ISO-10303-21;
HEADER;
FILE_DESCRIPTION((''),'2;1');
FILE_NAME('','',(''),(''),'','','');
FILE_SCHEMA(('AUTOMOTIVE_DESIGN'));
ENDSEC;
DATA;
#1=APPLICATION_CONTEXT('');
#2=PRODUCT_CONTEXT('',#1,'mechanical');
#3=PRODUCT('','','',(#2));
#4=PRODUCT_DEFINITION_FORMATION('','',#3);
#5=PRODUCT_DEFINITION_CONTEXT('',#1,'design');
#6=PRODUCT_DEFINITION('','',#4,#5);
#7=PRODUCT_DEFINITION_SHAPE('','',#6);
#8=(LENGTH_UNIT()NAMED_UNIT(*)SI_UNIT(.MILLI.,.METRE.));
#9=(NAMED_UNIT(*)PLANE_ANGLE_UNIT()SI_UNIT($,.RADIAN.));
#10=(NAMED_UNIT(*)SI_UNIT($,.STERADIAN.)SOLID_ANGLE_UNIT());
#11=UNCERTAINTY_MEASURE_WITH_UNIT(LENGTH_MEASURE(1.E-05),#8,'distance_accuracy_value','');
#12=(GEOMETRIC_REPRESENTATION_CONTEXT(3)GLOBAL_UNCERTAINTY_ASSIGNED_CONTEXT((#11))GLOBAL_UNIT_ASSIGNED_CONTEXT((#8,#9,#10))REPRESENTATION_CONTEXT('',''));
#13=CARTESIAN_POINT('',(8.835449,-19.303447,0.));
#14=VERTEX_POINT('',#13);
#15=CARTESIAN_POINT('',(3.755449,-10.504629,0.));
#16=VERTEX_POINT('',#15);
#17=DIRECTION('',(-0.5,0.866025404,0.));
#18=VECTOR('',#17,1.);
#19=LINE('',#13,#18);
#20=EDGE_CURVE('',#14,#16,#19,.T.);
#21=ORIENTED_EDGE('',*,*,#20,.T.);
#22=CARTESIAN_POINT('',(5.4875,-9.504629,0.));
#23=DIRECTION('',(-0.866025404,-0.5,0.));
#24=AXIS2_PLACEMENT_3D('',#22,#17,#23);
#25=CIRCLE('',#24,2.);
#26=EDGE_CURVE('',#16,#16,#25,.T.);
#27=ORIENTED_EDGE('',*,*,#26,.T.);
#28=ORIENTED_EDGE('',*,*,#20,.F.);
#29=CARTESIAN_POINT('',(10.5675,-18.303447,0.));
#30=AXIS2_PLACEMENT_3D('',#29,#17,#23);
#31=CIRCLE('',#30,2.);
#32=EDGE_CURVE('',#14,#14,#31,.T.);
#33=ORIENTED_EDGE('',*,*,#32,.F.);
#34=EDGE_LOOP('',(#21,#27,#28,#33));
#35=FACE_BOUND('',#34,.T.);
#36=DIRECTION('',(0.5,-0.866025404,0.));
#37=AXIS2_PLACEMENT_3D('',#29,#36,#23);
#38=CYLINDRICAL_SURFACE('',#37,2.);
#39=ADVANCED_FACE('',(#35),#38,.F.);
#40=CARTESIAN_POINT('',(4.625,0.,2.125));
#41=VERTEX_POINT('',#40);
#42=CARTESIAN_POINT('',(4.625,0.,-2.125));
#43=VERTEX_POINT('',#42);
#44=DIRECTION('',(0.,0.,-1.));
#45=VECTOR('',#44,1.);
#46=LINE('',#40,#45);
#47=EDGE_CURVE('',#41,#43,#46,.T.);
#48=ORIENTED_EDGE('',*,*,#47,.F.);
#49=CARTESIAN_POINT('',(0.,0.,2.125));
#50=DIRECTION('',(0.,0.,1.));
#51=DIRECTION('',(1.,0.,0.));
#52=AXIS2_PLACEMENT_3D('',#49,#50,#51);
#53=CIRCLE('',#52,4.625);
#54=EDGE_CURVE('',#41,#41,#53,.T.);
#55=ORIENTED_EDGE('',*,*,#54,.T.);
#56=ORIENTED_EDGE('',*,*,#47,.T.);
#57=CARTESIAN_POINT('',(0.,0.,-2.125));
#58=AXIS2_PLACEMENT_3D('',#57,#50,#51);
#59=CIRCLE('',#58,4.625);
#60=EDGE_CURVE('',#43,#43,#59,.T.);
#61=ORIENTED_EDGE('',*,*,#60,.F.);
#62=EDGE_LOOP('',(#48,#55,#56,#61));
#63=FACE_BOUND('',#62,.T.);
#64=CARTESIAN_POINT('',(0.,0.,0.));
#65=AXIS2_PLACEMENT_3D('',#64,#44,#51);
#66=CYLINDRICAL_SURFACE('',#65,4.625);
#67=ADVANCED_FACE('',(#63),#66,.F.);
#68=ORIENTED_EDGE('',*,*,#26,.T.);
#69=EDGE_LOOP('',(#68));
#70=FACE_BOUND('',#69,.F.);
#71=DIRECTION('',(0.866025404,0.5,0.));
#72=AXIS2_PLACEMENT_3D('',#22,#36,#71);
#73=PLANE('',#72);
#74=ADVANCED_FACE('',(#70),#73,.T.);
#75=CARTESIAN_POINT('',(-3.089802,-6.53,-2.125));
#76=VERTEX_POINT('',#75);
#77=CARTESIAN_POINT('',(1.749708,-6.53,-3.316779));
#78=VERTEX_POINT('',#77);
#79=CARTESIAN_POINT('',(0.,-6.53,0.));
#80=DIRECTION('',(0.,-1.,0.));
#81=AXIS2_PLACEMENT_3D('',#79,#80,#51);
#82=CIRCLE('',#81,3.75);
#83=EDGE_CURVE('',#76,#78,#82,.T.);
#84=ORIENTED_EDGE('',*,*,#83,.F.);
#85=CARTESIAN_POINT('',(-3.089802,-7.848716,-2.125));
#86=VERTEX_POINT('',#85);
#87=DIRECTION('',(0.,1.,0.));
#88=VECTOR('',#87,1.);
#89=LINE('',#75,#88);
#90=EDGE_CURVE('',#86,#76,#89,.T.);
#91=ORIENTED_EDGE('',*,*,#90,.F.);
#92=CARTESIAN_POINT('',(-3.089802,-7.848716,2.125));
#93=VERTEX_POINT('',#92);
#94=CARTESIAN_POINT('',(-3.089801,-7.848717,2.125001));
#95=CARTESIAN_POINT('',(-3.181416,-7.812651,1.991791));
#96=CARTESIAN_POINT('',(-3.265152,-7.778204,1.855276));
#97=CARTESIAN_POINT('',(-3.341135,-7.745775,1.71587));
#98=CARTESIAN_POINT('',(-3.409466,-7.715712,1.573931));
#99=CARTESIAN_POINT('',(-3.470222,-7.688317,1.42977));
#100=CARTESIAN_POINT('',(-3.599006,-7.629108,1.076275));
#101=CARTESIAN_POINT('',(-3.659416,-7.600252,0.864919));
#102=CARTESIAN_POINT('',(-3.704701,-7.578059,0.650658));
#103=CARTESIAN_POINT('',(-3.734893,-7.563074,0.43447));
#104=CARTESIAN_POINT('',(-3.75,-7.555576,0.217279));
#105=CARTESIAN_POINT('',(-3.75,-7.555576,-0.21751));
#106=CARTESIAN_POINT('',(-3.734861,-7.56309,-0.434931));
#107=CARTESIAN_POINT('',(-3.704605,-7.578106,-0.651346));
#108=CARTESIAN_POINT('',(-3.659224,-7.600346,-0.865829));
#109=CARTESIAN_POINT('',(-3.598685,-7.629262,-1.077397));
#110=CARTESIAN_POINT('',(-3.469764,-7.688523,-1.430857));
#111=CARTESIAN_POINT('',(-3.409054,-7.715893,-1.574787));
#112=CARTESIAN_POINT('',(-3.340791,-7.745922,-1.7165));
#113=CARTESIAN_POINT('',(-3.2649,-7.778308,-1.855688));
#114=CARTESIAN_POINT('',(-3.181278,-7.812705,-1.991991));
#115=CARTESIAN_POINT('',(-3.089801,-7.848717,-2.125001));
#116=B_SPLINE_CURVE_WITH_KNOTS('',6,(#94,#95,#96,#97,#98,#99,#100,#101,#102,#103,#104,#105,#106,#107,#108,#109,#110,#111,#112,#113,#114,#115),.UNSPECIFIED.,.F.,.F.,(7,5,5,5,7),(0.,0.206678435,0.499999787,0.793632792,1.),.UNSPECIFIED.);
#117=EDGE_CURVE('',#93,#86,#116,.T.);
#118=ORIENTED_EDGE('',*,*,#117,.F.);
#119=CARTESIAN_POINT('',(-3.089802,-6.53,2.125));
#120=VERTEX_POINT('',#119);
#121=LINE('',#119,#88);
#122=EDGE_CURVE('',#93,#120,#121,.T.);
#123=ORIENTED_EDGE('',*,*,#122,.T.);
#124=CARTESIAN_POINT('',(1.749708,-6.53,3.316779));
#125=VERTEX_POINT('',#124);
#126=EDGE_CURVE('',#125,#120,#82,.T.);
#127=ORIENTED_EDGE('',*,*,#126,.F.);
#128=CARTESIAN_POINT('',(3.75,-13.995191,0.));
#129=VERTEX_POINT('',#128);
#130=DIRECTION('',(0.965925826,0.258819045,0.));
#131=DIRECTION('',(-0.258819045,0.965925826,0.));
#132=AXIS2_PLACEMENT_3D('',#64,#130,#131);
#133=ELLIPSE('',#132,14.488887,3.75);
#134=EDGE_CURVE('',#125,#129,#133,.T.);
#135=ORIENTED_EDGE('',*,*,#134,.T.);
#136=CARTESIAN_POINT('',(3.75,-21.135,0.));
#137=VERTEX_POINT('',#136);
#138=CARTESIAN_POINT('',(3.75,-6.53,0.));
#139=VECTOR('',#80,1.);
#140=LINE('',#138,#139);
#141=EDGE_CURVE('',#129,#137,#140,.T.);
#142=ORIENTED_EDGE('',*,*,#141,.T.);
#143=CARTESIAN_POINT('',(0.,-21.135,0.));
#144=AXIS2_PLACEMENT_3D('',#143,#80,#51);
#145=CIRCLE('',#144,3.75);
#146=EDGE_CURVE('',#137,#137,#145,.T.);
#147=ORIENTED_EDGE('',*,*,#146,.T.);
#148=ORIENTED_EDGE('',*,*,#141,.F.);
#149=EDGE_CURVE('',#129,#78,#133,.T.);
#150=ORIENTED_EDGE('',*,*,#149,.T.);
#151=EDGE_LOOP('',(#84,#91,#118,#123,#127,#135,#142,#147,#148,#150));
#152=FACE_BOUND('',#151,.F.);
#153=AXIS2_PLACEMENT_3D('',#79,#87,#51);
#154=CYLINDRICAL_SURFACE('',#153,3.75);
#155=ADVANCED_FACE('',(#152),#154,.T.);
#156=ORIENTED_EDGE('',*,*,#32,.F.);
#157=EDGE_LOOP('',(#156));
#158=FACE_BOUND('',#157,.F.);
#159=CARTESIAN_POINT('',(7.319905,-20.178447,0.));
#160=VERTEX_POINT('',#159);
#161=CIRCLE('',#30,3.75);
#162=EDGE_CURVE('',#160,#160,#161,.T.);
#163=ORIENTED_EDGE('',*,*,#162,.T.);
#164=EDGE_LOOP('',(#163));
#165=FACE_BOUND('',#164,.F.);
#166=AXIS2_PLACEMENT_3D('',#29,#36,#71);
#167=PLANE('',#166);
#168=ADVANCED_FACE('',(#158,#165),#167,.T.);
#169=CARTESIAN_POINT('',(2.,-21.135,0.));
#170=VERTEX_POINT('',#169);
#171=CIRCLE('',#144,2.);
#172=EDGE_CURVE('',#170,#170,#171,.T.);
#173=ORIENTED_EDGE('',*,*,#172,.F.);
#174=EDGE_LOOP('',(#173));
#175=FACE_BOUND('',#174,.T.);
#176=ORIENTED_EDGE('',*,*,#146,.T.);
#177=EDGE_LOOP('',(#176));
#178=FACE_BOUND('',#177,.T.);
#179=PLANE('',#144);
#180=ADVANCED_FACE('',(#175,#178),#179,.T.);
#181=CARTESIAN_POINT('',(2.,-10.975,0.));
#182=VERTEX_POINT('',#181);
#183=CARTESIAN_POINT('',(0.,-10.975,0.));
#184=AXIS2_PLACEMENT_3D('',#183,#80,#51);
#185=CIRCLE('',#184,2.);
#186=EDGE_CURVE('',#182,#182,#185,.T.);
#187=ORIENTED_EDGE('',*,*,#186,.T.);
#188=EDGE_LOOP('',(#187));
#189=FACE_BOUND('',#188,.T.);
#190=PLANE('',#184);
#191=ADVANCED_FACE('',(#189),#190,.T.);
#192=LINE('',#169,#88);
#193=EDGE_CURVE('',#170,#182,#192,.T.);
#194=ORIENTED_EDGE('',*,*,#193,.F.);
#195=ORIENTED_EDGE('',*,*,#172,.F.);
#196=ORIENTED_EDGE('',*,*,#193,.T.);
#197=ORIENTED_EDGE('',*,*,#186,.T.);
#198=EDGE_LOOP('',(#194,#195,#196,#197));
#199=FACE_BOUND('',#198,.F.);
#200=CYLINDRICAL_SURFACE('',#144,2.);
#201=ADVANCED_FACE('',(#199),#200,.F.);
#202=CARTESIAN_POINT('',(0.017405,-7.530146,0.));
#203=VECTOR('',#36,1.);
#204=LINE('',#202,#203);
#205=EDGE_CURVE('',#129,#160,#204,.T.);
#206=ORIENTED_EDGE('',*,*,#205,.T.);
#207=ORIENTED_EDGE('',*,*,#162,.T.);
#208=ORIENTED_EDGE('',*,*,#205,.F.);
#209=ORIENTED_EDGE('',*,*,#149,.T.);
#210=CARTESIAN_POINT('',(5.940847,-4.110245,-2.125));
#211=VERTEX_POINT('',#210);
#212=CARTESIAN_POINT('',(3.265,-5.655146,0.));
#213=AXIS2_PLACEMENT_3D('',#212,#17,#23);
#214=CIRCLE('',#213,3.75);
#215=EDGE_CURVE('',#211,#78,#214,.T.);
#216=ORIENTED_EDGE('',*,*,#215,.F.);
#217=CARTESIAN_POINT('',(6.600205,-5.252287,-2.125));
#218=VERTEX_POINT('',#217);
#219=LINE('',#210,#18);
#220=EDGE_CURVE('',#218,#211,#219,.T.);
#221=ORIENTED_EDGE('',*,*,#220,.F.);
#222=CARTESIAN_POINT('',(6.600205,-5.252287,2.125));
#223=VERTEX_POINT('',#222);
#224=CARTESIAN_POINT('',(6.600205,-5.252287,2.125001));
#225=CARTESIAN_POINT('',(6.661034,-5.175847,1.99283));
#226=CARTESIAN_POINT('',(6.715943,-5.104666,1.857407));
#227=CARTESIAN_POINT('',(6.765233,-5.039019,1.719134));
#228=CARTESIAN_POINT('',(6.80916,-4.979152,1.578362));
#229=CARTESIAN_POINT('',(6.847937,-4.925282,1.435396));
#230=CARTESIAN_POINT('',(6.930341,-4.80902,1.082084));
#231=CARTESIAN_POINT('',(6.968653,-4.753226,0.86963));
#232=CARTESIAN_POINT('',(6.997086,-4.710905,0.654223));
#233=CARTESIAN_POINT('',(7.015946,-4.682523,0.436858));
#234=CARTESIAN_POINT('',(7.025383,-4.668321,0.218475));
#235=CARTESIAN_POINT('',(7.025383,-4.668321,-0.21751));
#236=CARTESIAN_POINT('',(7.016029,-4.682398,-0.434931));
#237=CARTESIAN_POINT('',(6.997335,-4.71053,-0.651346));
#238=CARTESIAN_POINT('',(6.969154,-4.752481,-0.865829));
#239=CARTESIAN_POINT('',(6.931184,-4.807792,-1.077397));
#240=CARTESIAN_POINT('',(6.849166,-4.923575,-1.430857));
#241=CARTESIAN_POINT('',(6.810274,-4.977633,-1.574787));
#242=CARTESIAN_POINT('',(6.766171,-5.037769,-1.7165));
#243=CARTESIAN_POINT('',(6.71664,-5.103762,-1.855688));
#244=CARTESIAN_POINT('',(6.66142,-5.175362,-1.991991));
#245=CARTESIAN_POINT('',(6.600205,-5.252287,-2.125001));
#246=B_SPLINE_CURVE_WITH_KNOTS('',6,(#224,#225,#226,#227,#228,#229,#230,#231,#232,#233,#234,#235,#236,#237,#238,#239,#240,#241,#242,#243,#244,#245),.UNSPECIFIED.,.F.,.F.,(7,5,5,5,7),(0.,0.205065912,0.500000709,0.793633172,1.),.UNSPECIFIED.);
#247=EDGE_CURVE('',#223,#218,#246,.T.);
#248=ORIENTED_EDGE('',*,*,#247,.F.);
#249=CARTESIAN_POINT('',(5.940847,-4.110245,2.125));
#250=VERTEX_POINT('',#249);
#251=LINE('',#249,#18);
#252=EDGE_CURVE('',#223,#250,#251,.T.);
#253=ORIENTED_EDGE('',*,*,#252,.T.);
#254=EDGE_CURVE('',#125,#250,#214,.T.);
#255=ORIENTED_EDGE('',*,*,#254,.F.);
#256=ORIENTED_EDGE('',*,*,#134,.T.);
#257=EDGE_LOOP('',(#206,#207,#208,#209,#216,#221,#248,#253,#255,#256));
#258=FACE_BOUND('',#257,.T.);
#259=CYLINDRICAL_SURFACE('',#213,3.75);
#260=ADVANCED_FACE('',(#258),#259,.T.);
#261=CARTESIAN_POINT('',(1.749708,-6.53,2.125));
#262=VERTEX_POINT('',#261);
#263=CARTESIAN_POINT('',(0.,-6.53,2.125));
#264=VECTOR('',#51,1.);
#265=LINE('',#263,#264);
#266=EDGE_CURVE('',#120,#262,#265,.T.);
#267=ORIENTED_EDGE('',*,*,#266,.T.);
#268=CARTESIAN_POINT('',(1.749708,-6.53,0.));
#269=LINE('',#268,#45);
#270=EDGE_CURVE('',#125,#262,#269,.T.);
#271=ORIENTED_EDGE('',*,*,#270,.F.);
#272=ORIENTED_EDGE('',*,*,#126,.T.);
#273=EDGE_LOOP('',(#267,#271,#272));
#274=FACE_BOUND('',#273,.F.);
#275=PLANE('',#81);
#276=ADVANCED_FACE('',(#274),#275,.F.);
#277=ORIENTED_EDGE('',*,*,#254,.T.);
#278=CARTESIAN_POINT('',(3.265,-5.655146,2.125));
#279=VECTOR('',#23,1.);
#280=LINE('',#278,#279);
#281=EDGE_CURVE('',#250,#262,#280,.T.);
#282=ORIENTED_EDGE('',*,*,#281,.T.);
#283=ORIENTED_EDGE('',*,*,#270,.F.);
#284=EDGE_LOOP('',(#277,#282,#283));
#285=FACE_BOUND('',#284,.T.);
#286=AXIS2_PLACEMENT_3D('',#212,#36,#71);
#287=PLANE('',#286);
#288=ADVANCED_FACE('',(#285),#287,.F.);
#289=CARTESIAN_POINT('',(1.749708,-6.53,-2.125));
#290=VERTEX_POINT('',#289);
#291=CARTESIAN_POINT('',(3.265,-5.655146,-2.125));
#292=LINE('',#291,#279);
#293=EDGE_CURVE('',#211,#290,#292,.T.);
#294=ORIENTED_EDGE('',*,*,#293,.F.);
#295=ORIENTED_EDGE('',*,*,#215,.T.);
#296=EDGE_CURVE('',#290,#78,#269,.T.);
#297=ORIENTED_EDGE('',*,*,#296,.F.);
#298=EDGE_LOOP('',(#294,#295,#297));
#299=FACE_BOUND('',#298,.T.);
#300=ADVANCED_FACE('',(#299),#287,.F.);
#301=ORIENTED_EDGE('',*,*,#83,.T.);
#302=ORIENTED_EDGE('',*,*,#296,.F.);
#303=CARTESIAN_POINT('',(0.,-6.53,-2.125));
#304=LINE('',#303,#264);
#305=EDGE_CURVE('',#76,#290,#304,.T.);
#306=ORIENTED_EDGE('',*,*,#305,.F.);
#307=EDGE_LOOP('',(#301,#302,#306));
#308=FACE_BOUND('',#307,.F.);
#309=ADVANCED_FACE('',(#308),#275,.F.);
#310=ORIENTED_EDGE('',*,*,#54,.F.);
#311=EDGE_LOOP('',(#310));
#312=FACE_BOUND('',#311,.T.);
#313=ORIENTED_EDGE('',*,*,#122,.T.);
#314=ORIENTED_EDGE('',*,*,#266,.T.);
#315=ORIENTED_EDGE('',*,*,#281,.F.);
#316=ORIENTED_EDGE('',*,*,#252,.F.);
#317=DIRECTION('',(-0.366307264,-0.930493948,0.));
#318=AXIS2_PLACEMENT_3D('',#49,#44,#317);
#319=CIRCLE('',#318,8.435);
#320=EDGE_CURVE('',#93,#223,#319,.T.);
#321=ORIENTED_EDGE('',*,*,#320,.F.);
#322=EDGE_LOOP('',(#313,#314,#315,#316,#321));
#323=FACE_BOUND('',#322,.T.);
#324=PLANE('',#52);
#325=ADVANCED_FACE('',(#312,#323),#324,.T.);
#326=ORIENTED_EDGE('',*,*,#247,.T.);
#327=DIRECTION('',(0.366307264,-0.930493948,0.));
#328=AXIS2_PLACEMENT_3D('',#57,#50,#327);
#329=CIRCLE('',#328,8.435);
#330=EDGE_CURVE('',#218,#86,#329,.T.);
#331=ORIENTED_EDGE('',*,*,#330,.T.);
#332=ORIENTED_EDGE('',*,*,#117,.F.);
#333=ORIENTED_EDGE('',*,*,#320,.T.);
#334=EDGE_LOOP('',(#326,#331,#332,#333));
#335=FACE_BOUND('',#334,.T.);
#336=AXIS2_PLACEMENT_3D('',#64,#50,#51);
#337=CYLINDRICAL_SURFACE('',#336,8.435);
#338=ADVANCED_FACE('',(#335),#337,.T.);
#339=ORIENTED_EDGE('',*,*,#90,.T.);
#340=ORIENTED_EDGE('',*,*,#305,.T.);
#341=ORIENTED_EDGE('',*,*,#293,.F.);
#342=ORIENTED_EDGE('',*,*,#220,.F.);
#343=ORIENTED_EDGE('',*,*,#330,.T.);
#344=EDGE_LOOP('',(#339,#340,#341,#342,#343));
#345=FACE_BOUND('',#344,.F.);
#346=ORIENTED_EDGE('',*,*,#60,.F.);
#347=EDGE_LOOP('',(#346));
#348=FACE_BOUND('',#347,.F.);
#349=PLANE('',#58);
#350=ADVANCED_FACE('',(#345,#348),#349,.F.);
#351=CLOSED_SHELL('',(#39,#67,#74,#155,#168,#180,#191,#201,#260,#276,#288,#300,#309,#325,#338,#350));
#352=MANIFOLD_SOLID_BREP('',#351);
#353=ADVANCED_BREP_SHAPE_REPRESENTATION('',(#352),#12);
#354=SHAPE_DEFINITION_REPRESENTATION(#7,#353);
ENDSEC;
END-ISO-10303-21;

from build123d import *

# Parameters (mm, degrees)
F0_R     = 8.435
F0_R_2   = 4.625
F1_DEPTH = 2.125
F3_R     = 3.75
F3_R_2   = 2
F4_DEPTH = 14.605
F5_R     = 2
F6_DEPTH = 10.16


# Not quite as in the source:
# - a pattern or mirror of a feature is missing from the dataset's text; its kind, count and spacing are read off the source's solid


with BuildPart() as f1:
    # F0 (on Top) → F1 (new body, symmetric)
    with BuildSketch(Plane.XY):
        Circle(F0_R)
        Circle(F0_R_2, mode=Mode.SUBTRACT)
    extrude(amount=F1_DEPTH, both=True)

    # F3 (on offset) → F4 (join)
    with BuildSketch(Plane.XZ.offset(6.53)):
        Circle(F3_R)
        Circle(F3_R_2, mode=Mode.SUBTRACT)
        Circle(F3_R_2)
    f4 = extrude(amount=F4_DEPTH)

    # F4_copies: F4 across plane
    add(f4.mirror(Plane(origin=(0, 0, 0), x_dir=(-0.2588190451, 0.9659258263, 0), z_dir=(0.9659258263, 0.2588190451, 0))))

    # F5 (on face) → F6 (cut)
    with BuildSketch(Plane.XZ.offset(21.135)):
        Circle(F5_R)
    f6 = extrude(amount=-F6_DEPTH, mode=Mode.SUBTRACT)

    # F6_copies: F6 across plane
    add(f6.mirror(Plane(origin=(0, 0, 0), x_dir=(-0.2588190451, 0.9659258263, 0), z_dir=(0.9659258263, 0.2588190451, 0))), mode=Mode.SUBTRACT)


solid = f1.part
